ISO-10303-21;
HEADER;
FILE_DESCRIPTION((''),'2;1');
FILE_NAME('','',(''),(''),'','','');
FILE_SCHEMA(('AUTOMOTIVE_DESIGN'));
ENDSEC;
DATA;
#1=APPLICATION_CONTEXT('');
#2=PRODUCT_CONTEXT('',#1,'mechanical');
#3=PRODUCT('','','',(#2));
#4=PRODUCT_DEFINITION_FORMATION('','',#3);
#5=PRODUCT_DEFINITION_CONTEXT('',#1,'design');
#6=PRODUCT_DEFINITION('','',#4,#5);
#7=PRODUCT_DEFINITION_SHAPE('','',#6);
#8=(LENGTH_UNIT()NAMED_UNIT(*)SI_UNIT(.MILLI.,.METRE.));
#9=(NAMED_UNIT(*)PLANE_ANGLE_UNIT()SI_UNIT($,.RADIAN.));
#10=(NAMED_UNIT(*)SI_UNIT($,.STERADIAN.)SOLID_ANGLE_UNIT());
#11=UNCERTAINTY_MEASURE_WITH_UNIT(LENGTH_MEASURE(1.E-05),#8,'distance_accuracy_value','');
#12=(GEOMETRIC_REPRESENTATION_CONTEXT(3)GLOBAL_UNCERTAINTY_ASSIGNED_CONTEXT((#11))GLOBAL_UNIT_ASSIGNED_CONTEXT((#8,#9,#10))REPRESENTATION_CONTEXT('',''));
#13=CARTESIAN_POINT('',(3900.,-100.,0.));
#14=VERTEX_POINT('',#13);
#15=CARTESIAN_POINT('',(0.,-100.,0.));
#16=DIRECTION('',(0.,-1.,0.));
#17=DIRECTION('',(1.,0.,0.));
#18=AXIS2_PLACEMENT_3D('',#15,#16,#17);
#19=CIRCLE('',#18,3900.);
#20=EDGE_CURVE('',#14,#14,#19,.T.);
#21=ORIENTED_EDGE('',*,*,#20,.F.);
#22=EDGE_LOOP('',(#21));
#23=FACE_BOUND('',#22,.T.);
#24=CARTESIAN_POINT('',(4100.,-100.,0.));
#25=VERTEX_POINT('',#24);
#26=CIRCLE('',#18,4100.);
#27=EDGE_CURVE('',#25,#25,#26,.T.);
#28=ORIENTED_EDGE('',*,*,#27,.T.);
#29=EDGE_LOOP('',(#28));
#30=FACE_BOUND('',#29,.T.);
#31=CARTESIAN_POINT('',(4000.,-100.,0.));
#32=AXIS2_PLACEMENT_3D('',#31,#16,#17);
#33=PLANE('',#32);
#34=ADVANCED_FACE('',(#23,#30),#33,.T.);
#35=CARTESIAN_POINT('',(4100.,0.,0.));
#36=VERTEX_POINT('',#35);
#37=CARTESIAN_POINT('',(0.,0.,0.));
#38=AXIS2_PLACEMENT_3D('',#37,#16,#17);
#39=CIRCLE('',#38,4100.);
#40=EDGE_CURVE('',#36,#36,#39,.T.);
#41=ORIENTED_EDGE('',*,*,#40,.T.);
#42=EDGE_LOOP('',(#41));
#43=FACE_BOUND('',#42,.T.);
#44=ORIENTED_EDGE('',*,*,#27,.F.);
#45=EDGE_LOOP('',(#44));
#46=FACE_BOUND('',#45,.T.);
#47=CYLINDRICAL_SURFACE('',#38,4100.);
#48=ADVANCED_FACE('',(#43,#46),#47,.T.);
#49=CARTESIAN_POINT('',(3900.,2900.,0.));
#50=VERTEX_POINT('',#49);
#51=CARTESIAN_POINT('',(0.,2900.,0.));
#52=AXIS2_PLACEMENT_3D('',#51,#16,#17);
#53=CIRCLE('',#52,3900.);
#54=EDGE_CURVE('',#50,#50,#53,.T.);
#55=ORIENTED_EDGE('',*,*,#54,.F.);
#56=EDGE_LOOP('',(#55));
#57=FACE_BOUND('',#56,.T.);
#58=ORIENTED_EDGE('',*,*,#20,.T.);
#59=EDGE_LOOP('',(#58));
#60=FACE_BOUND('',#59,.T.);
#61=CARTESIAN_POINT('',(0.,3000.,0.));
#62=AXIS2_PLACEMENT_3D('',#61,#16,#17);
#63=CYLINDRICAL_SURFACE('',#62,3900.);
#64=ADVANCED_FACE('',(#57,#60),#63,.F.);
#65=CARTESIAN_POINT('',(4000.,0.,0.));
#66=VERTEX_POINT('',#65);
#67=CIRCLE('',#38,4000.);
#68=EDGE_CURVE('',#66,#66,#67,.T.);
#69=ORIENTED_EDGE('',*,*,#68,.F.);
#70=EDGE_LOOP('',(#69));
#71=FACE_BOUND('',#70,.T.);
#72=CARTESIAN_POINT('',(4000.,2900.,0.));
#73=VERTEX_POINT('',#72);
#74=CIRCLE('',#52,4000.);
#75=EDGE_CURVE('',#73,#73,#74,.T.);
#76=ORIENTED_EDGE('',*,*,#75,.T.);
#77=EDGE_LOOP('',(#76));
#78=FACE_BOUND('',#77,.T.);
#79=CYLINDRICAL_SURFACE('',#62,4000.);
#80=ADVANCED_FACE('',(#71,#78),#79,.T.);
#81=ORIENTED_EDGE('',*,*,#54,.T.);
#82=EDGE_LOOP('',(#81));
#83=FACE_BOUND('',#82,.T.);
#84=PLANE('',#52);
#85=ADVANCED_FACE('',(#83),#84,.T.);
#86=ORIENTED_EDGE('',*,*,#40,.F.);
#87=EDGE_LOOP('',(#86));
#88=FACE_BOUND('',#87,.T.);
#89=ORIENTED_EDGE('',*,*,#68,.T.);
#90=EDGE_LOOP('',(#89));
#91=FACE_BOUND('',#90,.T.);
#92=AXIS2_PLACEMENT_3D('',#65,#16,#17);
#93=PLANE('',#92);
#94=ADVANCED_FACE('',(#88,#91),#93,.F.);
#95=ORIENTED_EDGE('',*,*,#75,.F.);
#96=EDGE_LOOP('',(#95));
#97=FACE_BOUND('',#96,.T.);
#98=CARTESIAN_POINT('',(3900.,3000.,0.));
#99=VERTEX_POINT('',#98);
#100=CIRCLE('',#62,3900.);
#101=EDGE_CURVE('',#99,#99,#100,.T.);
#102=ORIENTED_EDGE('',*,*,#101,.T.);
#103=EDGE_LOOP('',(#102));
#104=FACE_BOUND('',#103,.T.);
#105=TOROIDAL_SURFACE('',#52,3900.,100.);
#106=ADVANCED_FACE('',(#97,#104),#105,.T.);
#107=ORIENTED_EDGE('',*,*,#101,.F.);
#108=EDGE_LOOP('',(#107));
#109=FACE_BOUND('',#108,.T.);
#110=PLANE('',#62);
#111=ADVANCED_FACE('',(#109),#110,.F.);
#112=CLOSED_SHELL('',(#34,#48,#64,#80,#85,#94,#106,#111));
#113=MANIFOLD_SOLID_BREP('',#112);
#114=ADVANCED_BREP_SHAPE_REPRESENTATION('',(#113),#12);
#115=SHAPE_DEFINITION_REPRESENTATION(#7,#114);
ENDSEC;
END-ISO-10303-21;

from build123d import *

# Parameters (mm, degrees)
THICKEN1_T2 = 100


with BuildPart() as body_1:
    # Surface-Revolve2: a surface, the sketch's curves turned about an axis
    with BuildLine(Plane.XY, mode=Mode.PRIVATE) as surface_revolve2_1_path:
        Line((0, 3000), (3900, 3000))
        ThreePointArc((3900, 3000), (3970.710678119, 2970.710678119), (4000, 2900))
        Line((4000, 2900), (4000, 0))
        Line((4000, 0), (4100, 0))
    surface_revolve2_1 = Shell.revolve(surface_revolve2_1_path.wire(), 360, Axis((0, 3000, 0), (0, -1, 0)))
    add(Solid.thicken(surface_revolve2_1, -THICKEN1_T2))


solid = body_1.part
